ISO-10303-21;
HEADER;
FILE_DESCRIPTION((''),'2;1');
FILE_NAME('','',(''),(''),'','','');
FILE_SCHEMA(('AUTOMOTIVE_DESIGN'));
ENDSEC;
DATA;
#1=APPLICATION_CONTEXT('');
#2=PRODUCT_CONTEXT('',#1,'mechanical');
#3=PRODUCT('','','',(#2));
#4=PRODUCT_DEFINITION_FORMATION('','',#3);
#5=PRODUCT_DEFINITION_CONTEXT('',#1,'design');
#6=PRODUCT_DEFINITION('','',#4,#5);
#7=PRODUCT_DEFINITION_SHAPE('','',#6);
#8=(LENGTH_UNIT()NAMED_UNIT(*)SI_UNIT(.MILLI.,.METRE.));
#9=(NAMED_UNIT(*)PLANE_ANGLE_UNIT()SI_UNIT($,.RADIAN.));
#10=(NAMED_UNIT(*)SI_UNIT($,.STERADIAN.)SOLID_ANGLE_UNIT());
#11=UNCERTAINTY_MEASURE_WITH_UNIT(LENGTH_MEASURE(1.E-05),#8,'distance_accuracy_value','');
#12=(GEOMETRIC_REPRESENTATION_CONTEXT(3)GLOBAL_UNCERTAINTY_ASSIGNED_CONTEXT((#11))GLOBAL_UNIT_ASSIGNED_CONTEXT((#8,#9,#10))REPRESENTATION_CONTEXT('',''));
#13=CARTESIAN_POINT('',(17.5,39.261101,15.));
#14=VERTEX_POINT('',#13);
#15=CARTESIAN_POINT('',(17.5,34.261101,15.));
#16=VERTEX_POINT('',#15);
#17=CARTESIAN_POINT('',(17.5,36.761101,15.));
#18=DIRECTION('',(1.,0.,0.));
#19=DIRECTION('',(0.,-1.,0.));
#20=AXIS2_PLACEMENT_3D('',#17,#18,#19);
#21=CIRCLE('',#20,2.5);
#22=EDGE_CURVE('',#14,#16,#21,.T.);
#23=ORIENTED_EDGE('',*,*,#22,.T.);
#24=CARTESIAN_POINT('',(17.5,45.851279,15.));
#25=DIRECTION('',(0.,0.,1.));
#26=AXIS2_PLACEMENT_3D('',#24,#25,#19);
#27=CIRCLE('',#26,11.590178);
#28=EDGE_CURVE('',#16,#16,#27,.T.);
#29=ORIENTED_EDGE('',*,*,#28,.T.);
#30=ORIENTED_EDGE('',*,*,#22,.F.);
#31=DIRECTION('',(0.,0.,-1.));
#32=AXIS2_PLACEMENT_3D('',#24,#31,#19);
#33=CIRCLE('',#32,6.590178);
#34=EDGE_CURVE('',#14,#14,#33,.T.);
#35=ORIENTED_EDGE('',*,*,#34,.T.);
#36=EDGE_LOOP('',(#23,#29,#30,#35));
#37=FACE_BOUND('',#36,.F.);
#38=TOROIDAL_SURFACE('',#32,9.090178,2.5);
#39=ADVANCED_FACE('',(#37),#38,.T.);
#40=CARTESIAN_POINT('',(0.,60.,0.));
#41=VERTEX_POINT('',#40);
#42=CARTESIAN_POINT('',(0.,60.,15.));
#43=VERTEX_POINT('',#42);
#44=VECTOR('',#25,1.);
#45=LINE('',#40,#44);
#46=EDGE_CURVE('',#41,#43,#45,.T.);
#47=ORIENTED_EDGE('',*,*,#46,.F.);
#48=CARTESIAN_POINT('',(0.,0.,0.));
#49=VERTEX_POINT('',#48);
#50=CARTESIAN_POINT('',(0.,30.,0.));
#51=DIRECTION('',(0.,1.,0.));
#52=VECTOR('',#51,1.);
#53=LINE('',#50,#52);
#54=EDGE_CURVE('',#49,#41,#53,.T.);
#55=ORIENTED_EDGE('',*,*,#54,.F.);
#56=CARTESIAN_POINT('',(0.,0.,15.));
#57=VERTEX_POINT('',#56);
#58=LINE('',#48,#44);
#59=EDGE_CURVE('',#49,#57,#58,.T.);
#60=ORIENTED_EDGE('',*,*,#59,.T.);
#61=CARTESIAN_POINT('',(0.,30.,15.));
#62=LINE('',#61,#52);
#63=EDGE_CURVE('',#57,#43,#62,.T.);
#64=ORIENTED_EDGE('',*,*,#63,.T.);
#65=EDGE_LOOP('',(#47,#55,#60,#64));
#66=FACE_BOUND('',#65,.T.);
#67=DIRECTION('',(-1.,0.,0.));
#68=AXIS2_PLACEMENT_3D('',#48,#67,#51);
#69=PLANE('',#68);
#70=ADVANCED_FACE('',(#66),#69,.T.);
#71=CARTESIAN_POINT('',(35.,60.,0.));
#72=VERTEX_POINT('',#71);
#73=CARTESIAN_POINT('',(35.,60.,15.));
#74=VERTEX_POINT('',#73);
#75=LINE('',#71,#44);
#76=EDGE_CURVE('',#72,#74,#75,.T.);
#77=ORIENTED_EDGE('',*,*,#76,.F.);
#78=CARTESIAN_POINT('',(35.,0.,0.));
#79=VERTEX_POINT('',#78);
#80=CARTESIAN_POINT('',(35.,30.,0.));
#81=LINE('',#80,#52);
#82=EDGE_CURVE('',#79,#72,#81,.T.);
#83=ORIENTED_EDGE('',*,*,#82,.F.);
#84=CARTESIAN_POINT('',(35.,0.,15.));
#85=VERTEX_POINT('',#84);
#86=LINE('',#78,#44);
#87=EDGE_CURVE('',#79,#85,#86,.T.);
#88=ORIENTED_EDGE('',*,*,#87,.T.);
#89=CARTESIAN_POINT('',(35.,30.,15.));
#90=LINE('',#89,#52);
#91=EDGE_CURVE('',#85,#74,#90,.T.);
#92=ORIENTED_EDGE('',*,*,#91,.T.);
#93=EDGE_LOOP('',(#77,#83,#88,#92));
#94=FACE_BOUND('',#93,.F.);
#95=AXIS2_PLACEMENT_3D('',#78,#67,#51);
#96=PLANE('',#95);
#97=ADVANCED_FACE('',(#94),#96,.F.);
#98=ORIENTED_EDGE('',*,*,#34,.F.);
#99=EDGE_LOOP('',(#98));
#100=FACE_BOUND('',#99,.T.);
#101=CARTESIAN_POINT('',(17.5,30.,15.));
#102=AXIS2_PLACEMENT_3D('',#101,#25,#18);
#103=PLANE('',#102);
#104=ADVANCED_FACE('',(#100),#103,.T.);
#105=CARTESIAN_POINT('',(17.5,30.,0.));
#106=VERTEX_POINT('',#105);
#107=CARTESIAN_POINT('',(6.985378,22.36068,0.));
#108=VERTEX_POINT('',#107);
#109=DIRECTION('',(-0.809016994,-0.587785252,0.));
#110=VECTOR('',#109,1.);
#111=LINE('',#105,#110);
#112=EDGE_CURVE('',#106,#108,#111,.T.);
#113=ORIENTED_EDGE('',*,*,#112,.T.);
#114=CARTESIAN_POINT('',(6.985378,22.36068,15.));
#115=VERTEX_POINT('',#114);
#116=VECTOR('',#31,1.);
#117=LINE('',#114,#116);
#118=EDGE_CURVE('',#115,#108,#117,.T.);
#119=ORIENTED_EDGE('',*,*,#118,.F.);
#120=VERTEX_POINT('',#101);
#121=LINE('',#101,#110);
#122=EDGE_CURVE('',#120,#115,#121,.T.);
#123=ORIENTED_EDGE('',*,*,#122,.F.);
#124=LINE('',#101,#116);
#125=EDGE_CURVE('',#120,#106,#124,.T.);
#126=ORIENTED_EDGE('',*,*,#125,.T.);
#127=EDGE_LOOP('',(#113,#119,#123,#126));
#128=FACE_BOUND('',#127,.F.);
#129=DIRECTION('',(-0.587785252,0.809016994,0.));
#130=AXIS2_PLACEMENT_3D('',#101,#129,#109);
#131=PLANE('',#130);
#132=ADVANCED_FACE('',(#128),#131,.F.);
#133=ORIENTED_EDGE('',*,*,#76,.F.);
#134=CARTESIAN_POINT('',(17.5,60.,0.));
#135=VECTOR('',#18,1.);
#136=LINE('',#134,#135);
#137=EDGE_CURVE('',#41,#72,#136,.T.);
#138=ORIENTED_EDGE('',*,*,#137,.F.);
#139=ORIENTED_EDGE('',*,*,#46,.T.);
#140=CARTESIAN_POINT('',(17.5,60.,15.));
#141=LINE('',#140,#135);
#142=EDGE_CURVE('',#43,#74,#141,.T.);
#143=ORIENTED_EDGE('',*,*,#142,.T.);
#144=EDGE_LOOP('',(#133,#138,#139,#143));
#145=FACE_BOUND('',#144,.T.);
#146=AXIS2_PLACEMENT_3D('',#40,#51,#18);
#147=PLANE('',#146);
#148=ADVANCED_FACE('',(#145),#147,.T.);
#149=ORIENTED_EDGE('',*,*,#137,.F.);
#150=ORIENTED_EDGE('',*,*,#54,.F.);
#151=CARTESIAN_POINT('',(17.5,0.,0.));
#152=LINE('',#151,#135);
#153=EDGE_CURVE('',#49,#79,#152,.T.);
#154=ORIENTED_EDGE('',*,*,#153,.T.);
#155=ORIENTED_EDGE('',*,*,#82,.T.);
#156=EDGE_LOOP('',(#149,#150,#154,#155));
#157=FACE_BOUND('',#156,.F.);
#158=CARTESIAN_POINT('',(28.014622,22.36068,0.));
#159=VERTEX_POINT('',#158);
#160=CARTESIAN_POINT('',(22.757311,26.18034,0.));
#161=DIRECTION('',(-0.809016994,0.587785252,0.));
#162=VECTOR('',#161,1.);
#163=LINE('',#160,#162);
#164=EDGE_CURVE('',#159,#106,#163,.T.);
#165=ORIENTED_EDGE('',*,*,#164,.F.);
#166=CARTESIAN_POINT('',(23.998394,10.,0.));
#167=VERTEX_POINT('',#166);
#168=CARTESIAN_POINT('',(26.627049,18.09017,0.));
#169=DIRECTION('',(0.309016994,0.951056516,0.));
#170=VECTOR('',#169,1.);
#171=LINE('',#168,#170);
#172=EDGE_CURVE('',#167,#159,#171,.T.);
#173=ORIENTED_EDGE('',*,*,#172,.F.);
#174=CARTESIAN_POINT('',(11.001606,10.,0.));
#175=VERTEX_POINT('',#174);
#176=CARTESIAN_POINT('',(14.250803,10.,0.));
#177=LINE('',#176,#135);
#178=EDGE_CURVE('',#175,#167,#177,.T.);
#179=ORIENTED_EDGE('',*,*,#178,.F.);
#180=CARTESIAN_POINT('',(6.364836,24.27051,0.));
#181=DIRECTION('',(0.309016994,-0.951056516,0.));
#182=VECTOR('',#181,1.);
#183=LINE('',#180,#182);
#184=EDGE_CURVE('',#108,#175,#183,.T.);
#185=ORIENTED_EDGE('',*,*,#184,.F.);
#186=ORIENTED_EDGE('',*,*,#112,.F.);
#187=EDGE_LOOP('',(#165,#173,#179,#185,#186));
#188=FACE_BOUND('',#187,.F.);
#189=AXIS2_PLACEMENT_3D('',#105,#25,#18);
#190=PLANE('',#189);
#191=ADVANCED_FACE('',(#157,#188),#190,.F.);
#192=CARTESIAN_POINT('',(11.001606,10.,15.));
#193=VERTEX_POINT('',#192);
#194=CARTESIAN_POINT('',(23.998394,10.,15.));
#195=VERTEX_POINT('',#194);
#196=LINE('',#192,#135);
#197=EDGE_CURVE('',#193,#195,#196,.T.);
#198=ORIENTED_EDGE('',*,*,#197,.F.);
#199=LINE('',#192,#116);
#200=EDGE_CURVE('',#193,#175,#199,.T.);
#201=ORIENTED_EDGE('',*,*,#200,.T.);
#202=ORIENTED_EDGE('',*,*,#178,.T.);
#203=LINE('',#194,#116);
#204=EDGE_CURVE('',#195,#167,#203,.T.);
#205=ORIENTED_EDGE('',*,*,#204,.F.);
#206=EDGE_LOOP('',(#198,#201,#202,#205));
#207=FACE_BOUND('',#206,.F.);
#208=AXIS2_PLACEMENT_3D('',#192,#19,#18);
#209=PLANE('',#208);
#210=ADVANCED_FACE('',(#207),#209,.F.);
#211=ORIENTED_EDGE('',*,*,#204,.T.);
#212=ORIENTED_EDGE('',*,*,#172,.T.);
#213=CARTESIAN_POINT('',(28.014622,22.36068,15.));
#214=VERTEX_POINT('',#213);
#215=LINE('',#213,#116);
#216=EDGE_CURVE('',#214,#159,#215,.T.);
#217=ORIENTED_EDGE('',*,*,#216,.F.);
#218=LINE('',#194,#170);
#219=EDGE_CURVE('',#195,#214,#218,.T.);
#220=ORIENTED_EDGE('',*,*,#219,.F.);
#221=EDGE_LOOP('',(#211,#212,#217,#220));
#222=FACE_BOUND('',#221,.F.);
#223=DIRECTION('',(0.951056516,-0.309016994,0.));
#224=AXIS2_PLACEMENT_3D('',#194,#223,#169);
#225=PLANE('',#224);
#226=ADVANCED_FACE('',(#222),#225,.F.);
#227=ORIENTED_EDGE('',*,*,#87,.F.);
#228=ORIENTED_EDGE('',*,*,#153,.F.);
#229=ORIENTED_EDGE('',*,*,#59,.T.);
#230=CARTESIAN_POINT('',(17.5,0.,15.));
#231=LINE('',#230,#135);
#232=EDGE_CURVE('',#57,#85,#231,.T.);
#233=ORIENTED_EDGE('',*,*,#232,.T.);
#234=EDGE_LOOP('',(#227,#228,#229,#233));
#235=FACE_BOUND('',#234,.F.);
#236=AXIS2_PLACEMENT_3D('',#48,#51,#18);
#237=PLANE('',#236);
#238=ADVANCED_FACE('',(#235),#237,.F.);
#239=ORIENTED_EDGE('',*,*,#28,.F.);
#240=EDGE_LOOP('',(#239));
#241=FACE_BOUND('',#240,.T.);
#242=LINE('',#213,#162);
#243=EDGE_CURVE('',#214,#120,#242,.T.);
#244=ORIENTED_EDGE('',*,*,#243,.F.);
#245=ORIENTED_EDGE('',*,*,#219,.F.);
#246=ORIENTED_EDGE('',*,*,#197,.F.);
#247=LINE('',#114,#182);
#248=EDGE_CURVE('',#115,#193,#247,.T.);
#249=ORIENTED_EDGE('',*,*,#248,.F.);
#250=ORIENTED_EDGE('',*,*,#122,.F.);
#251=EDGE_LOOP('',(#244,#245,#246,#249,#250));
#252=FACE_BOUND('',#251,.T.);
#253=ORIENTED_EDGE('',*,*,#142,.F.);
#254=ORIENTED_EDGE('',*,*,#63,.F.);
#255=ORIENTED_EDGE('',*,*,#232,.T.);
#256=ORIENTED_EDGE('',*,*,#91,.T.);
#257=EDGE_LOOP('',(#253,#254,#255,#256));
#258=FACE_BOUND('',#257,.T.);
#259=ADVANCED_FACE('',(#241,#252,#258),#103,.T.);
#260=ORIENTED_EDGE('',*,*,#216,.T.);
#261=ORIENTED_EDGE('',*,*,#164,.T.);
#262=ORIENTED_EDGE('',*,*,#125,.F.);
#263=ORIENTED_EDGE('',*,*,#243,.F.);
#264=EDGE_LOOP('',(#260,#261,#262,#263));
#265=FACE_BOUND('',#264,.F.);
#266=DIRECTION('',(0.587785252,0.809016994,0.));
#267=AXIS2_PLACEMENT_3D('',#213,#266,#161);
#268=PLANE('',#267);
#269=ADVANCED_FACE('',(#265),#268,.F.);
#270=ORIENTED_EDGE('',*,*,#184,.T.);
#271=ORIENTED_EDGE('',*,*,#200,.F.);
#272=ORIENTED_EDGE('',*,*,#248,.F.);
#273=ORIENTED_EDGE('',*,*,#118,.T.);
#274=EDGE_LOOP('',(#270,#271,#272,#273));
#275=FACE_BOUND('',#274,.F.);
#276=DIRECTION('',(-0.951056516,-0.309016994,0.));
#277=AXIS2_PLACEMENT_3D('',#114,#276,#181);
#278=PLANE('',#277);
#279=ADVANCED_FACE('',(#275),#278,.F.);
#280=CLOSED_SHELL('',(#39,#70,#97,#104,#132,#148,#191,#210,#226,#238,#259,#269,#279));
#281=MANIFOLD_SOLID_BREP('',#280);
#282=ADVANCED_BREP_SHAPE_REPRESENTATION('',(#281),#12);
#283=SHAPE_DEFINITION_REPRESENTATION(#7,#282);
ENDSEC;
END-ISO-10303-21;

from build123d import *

# Parameters (mm, degrees)
F0_W     = 35
F0_H     = 60
F1_DEPTH = 15
F3_DEPTH = 25


with BuildPart() as f1:
    # F0 (on Top) → F1 (new body)
    with BuildSketch(Plane.XY):
        with Locations((17.5, 30)):
            Rectangle(F0_W, F0_H)
    extrude(amount=F1_DEPTH)

    # F2 (on face) → F3 (cut)
    with BuildSketch(Plane.XY.offset(15)):
        Polygon((23.9983939247, 10), (28.0146222424, 22.360679775), (17.5, 30), (6.9853777576, 22.360679775), (11.0016060753, 10), align=None)
    extrude(amount=-F3_DEPTH, mode=Mode.SUBTRACT)

    # F5 (on mid) → F6 (revolve)
    with BuildSketch(Plane.YZ.offset(17.5)):
        with BuildLine():
            Line((34.2611013353, 15), (39.2611013353, 15))
            ThreePointArc((39.2611013353, 15), (36.7611013353, 17.5), (34.2611013353, 15))
        make_face()
        with BuildLine():
            ThreePointArc((34.2611013353, 15), (36.7611013353, 12.5), (39.2611013353, 15))
            Line((39.2611013353, 15), (34.2611013353, 15))
        make_face()
    revolve(axis=Axis((17.5, 45.8512790501, 18.8291036189), (0, 0, 1)))


solid = f1.part
